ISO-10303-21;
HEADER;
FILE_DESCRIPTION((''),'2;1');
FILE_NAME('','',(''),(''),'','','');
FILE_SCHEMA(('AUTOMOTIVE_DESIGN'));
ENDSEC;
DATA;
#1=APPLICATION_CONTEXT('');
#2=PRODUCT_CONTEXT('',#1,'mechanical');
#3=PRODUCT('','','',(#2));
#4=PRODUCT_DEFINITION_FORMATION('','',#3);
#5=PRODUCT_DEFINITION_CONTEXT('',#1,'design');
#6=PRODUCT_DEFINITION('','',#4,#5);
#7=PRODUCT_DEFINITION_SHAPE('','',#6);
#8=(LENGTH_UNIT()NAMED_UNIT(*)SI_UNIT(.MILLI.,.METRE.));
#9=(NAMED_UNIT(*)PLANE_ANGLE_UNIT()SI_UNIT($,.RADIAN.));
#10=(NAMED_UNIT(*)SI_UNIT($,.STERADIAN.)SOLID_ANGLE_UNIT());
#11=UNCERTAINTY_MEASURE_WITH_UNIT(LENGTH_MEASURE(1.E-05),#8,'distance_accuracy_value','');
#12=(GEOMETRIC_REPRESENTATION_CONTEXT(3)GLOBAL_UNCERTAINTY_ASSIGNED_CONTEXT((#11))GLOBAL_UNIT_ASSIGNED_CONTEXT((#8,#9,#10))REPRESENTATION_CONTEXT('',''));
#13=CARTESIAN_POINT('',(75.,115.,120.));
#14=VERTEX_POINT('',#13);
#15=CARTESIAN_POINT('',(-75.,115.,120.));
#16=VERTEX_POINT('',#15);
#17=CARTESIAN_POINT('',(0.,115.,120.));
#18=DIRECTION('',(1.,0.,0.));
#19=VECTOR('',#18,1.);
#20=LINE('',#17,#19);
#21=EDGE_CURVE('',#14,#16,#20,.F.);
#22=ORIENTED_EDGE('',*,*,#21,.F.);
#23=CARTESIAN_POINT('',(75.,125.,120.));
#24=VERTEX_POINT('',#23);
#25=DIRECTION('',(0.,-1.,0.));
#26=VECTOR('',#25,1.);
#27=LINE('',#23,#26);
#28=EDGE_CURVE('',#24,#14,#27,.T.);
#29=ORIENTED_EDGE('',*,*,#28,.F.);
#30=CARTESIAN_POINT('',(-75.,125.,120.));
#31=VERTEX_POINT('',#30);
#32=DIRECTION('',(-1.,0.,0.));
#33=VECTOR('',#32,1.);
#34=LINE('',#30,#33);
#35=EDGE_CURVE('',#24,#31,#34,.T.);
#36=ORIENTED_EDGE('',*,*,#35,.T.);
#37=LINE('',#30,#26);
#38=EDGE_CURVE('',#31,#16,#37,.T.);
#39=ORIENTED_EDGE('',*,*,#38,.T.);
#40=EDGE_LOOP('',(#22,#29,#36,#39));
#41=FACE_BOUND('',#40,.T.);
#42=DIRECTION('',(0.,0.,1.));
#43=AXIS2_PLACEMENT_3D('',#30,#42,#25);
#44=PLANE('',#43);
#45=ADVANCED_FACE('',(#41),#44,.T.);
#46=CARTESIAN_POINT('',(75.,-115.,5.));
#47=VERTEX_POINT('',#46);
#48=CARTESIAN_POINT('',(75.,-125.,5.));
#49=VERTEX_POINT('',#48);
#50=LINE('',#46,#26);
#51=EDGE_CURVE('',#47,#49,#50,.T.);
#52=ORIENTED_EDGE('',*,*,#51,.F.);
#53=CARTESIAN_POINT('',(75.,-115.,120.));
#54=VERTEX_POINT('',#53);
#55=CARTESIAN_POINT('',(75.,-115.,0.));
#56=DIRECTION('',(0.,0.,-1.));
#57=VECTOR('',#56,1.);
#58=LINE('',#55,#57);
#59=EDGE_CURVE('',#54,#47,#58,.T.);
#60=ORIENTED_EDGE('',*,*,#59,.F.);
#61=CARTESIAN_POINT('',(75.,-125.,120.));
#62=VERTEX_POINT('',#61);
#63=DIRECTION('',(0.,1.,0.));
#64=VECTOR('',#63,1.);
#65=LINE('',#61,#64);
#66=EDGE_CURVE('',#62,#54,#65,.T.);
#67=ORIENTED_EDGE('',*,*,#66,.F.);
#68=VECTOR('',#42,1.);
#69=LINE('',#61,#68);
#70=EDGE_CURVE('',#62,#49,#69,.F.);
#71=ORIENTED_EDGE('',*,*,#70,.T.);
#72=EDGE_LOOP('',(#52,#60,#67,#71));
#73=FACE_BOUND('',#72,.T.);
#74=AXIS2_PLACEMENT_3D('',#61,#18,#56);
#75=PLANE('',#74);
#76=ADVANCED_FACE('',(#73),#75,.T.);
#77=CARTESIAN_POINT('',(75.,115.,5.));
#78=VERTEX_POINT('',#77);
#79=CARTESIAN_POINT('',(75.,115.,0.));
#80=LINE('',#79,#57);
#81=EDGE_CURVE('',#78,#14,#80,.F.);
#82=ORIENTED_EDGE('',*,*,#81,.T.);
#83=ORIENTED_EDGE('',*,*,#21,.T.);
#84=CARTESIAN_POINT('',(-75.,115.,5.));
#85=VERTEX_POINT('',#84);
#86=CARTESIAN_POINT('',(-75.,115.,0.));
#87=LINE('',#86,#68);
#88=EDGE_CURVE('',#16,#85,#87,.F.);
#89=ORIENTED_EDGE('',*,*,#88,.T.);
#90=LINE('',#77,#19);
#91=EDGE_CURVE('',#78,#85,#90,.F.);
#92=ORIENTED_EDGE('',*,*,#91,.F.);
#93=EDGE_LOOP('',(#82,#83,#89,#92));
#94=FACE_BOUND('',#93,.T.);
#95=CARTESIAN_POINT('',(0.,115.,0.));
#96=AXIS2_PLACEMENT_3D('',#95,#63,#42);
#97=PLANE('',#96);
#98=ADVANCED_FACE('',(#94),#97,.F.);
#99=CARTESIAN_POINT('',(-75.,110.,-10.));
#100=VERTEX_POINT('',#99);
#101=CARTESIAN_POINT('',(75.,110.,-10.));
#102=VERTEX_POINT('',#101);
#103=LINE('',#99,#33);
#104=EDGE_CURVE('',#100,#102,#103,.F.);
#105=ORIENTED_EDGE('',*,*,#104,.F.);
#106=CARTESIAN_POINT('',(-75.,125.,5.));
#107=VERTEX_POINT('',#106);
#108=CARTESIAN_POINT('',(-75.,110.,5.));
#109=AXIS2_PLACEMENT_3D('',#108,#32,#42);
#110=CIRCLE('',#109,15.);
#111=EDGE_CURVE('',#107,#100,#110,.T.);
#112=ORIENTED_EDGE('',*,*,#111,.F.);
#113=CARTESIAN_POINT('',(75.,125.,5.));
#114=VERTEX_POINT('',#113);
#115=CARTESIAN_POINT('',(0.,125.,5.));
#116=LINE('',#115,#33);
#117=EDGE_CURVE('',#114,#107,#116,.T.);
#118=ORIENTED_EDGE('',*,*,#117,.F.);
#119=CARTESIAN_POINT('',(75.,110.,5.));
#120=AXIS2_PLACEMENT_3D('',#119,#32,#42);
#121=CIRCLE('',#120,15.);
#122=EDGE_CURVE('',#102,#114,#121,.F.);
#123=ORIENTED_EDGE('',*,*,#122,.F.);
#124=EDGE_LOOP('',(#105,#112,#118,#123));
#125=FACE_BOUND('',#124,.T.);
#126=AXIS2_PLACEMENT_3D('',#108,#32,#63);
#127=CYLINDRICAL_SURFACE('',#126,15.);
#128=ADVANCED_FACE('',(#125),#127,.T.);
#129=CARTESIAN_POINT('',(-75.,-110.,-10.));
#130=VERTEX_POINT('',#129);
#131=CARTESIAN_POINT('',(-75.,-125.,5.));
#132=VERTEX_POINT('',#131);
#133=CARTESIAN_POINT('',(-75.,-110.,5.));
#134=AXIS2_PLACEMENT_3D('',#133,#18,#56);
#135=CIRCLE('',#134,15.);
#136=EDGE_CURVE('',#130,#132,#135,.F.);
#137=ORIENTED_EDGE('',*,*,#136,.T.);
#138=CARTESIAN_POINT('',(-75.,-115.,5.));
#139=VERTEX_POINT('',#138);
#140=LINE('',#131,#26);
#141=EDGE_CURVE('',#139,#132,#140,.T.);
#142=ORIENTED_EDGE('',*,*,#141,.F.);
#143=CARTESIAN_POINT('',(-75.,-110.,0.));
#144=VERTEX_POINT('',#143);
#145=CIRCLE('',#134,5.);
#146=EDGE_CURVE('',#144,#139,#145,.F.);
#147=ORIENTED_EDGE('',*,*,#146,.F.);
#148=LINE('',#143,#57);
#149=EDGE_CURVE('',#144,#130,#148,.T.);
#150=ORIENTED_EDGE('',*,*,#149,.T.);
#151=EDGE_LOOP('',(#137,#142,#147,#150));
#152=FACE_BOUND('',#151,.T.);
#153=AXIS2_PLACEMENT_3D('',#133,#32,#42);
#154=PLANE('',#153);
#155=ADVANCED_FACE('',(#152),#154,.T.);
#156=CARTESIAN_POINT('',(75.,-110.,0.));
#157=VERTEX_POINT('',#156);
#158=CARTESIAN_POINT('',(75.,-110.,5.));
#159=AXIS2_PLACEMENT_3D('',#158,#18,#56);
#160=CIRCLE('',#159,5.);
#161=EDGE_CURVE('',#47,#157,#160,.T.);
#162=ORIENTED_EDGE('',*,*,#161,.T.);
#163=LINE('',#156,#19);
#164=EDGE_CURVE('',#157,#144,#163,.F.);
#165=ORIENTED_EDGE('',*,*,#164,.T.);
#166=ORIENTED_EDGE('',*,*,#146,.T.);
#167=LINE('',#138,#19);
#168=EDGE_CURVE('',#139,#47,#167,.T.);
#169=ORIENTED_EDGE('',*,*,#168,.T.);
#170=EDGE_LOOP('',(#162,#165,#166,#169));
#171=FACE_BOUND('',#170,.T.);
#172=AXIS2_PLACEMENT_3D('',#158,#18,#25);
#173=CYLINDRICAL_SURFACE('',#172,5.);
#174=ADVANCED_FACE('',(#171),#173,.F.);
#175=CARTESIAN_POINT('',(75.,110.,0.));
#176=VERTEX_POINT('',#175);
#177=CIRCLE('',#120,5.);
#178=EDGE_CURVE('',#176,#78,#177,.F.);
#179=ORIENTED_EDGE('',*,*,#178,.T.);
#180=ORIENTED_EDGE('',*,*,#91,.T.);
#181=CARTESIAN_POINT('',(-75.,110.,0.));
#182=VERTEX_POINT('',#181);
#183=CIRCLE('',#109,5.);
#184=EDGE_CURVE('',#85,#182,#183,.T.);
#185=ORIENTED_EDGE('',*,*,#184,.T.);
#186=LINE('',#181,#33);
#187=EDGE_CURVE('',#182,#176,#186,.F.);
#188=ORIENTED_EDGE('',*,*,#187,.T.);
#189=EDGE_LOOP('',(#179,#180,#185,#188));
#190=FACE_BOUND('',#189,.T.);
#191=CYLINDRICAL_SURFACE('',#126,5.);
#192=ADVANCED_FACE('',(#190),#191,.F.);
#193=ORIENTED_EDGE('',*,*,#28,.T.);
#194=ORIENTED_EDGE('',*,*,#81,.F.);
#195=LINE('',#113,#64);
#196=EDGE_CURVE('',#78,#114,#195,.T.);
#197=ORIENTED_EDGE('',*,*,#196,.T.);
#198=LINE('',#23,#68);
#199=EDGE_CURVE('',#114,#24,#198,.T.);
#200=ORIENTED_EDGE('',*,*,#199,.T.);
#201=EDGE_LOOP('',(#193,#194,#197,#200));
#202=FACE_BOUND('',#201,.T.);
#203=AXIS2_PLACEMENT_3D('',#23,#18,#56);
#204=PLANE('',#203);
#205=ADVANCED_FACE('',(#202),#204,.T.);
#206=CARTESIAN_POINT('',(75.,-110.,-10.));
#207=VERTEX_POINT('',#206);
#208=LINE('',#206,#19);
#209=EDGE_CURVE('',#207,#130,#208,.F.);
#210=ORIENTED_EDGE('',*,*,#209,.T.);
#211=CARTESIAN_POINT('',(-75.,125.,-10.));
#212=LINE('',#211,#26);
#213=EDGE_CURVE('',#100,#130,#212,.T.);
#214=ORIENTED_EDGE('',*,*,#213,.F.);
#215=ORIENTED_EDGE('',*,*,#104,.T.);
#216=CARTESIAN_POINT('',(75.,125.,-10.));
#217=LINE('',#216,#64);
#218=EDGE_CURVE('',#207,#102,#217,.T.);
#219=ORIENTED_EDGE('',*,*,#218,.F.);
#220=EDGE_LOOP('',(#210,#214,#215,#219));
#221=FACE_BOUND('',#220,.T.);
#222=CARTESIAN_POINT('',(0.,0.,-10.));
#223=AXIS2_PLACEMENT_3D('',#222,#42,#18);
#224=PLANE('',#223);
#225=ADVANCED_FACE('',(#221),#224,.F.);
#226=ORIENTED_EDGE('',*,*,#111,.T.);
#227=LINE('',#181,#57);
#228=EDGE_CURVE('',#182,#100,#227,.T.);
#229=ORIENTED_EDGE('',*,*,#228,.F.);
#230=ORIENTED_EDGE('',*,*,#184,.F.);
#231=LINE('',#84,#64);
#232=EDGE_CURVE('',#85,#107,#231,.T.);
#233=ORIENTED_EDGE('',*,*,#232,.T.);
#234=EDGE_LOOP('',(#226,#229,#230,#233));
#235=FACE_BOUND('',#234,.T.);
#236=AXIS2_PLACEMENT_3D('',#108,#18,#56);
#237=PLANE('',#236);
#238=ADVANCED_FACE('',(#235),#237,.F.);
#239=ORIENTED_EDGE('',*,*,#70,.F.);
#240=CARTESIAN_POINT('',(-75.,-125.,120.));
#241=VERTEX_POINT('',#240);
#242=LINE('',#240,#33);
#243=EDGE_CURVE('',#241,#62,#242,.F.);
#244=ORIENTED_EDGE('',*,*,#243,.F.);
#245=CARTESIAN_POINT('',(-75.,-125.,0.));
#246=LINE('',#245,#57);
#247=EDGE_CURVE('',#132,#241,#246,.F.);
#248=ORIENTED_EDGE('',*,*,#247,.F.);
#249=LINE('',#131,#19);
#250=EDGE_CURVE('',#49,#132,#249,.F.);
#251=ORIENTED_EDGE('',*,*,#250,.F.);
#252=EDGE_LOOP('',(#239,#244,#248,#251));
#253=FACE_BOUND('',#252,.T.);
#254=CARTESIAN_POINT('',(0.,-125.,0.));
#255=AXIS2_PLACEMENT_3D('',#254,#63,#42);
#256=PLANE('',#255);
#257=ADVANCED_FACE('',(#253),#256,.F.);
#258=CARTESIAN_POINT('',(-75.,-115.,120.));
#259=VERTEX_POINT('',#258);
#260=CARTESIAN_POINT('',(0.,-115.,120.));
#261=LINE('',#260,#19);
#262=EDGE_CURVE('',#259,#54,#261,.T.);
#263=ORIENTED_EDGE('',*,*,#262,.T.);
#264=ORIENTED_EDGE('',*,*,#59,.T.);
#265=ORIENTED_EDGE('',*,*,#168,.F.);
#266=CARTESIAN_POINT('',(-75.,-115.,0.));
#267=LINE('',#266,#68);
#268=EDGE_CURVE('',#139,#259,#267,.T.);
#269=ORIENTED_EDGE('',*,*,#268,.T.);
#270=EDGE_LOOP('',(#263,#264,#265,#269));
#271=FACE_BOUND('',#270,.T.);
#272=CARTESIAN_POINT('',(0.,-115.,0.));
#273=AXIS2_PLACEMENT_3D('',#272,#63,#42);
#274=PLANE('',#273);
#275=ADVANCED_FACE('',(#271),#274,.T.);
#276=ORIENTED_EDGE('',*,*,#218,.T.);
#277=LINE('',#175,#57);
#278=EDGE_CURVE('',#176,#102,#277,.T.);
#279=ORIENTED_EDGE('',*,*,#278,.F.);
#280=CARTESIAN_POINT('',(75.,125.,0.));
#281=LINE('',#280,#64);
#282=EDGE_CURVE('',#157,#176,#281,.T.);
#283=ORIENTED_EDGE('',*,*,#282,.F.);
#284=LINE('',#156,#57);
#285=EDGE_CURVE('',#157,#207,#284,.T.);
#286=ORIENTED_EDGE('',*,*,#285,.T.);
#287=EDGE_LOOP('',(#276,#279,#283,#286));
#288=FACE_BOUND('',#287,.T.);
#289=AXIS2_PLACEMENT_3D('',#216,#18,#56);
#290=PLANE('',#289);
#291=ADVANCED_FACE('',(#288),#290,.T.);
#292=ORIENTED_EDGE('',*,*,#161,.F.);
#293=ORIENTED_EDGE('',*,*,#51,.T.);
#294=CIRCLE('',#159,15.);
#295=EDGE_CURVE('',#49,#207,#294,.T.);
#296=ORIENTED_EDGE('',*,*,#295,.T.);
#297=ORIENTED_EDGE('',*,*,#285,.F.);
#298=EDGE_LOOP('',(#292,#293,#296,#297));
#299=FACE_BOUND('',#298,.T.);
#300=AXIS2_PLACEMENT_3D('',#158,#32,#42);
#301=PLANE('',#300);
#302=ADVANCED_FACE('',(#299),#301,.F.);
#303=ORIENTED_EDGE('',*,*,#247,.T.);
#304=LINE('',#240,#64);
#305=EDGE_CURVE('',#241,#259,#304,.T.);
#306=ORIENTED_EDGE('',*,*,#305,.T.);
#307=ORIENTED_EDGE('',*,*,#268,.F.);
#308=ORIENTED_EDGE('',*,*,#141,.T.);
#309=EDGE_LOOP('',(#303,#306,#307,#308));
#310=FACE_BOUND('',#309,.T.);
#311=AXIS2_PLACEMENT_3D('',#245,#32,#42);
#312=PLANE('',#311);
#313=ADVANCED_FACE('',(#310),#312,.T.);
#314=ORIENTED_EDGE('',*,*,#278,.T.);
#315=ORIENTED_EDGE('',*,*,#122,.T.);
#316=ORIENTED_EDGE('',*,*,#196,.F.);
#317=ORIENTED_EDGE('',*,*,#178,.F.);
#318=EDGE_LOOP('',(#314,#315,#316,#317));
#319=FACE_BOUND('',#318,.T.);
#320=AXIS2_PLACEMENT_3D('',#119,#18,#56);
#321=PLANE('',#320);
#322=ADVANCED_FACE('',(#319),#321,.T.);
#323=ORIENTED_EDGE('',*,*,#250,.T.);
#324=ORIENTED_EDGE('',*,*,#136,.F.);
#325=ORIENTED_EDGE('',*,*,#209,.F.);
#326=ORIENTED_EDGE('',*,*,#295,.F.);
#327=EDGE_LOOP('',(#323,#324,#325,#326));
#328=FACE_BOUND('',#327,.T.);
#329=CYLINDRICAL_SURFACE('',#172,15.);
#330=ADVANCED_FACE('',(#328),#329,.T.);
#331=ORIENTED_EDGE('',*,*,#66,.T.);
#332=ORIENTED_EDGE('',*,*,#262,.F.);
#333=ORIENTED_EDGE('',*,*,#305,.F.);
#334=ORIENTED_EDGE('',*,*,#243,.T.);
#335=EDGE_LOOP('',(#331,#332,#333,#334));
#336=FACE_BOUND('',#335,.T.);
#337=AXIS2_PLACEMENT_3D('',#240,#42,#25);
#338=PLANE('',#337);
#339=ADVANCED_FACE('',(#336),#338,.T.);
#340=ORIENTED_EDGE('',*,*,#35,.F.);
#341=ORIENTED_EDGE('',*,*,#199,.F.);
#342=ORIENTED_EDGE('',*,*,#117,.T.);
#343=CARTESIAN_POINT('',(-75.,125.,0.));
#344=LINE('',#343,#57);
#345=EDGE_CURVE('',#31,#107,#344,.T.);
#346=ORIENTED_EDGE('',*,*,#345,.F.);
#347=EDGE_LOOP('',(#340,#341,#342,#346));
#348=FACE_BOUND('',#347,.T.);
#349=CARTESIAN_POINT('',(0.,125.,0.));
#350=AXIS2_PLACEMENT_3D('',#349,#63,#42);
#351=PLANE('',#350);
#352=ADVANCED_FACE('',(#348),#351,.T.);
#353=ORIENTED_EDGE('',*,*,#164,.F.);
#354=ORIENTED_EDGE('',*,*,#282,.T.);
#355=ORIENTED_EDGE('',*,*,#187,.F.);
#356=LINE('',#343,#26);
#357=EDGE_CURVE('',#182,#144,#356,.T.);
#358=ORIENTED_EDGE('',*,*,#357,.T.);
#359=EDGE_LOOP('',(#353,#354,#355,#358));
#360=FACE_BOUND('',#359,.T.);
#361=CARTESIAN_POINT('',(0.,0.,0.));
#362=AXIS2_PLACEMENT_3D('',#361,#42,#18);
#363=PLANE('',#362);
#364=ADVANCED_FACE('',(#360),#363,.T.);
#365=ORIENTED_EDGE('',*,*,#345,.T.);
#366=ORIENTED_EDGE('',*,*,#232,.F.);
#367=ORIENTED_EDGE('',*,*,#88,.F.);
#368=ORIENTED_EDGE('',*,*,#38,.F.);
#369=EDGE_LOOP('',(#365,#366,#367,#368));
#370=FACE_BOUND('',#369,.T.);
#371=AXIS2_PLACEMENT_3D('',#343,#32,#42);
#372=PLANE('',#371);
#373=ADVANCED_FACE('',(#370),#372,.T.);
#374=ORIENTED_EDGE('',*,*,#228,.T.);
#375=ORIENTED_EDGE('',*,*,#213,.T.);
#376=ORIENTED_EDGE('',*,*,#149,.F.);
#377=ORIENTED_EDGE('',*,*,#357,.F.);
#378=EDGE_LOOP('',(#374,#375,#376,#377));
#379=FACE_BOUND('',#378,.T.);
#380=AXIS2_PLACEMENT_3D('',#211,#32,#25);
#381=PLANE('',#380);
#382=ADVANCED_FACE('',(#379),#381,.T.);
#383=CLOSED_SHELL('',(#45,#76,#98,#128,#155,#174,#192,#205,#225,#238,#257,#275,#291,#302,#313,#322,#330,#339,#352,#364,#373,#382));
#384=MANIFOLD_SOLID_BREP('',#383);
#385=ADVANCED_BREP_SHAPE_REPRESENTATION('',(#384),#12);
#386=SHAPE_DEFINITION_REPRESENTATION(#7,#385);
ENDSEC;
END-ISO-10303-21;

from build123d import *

# Parameters (mm, degrees)
SKETCH_1_W                         = 150
SKETCH_1_H                         = 250
SM_BASE_FLANGE_1_DEPTH             = 10
SM_EDGE_FLANGE_1_STRIP_W           = 50
SM_EDGE_FLANGE_1_STRIP_H           = 10
SM_EDGE_FLANGE_1_STRIP_CUT_DEPTH   = 150
SM_EDGE_FLANGE_1_STRIP_2_W         = 50
SM_EDGE_FLANGE_1_STRIP_2_H         = 10
SM_EDGE_FLANGE_1_STRIP_CUT_2_DEPTH = 150
SM_EDGE_FLANGE_1_DEPTH             = 150
SM_EDGE_FLANGE_1_BEND_DEPTH        = 150


# Sheet-metal steps are written as plain solids
with BuildPart() as part:
    # Sketch 1 → 基体-法兰1 (new body)
    with BuildSketch(Plane.XY):
        Rectangle(SKETCH_1_W, SKETCH_1_H)
    extrude(amount=-SM_BASE_FLANGE_1_DEPTH)

    # 边线-法兰1 strip (across the edge) → 边线-法兰1 strip cut (cut)
    with BuildSketch(Plane(origin=(75, 125, 0), x_dir=(0, -1, 0), z_dir=(-1, 0, 0))):
        with Locations((-10, -5)):
            Rectangle(SM_EDGE_FLANGE_1_STRIP_W, SM_EDGE_FLANGE_1_STRIP_H)
    extrude(amount=SM_EDGE_FLANGE_1_STRIP_CUT_DEPTH, mode=Mode.SUBTRACT)

    # 边线-法兰1 strip 2 (across the edge) → 边线-法兰1 strip cut 2 (cut)
    with BuildSketch(Plane(origin=(-75, -125, 0), x_dir=(0, 1, 0), z_dir=(1, 0, 0))):
        with Locations((-10, -5)):
            Rectangle(SM_EDGE_FLANGE_1_STRIP_2_W, SM_EDGE_FLANGE_1_STRIP_2_H)
    extrude(amount=SM_EDGE_FLANGE_1_STRIP_CUT_2_DEPTH, mode=Mode.SUBTRACT)

    # 边线-法兰1 section (across the edge) → 边线-法兰1 (add)
    with BuildSketch(Plane(origin=(75, 125, 0), x_dir=(0, -1, 0), z_dir=(-1, 0, 0))):
        with BuildLine():
            Line((0, 5), (0, 120))
            Line((0, 120), (10, 120))
            Line((10, 120), (10, 5))
            ThreePointArc((10, 5), (11.464466094, 1.464466094), (15, 0))
            Line((15, 0), (15, -10))
            ThreePointArc((15, -10), (4.393398282, -5.606601718), (0, 5))
        make_face()
    extrude(amount=SM_EDGE_FLANGE_1_DEPTH)

    # 边线-法兰1 section 2 (across the edge) → 边线-法兰1 bend (add)
    with BuildSketch(Plane(origin=(-75, -125, 0), x_dir=(0, 1, 0), z_dir=(1, 0, 0))):
        with BuildLine():
            Line((0, 5), (0, 120))
            Line((0, 120), (10, 120))
            Line((10, 120), (10, 5))
            ThreePointArc((10, 5), (11.464466094, 1.464466094), (15, 0))
            Line((15, 0), (15, -10))
            ThreePointArc((15, -10), (4.393398282, -5.606601718), (0, 5))
        make_face()
    extrude(amount=SM_EDGE_FLANGE_1_BEND_DEPTH)


solid = part.part
